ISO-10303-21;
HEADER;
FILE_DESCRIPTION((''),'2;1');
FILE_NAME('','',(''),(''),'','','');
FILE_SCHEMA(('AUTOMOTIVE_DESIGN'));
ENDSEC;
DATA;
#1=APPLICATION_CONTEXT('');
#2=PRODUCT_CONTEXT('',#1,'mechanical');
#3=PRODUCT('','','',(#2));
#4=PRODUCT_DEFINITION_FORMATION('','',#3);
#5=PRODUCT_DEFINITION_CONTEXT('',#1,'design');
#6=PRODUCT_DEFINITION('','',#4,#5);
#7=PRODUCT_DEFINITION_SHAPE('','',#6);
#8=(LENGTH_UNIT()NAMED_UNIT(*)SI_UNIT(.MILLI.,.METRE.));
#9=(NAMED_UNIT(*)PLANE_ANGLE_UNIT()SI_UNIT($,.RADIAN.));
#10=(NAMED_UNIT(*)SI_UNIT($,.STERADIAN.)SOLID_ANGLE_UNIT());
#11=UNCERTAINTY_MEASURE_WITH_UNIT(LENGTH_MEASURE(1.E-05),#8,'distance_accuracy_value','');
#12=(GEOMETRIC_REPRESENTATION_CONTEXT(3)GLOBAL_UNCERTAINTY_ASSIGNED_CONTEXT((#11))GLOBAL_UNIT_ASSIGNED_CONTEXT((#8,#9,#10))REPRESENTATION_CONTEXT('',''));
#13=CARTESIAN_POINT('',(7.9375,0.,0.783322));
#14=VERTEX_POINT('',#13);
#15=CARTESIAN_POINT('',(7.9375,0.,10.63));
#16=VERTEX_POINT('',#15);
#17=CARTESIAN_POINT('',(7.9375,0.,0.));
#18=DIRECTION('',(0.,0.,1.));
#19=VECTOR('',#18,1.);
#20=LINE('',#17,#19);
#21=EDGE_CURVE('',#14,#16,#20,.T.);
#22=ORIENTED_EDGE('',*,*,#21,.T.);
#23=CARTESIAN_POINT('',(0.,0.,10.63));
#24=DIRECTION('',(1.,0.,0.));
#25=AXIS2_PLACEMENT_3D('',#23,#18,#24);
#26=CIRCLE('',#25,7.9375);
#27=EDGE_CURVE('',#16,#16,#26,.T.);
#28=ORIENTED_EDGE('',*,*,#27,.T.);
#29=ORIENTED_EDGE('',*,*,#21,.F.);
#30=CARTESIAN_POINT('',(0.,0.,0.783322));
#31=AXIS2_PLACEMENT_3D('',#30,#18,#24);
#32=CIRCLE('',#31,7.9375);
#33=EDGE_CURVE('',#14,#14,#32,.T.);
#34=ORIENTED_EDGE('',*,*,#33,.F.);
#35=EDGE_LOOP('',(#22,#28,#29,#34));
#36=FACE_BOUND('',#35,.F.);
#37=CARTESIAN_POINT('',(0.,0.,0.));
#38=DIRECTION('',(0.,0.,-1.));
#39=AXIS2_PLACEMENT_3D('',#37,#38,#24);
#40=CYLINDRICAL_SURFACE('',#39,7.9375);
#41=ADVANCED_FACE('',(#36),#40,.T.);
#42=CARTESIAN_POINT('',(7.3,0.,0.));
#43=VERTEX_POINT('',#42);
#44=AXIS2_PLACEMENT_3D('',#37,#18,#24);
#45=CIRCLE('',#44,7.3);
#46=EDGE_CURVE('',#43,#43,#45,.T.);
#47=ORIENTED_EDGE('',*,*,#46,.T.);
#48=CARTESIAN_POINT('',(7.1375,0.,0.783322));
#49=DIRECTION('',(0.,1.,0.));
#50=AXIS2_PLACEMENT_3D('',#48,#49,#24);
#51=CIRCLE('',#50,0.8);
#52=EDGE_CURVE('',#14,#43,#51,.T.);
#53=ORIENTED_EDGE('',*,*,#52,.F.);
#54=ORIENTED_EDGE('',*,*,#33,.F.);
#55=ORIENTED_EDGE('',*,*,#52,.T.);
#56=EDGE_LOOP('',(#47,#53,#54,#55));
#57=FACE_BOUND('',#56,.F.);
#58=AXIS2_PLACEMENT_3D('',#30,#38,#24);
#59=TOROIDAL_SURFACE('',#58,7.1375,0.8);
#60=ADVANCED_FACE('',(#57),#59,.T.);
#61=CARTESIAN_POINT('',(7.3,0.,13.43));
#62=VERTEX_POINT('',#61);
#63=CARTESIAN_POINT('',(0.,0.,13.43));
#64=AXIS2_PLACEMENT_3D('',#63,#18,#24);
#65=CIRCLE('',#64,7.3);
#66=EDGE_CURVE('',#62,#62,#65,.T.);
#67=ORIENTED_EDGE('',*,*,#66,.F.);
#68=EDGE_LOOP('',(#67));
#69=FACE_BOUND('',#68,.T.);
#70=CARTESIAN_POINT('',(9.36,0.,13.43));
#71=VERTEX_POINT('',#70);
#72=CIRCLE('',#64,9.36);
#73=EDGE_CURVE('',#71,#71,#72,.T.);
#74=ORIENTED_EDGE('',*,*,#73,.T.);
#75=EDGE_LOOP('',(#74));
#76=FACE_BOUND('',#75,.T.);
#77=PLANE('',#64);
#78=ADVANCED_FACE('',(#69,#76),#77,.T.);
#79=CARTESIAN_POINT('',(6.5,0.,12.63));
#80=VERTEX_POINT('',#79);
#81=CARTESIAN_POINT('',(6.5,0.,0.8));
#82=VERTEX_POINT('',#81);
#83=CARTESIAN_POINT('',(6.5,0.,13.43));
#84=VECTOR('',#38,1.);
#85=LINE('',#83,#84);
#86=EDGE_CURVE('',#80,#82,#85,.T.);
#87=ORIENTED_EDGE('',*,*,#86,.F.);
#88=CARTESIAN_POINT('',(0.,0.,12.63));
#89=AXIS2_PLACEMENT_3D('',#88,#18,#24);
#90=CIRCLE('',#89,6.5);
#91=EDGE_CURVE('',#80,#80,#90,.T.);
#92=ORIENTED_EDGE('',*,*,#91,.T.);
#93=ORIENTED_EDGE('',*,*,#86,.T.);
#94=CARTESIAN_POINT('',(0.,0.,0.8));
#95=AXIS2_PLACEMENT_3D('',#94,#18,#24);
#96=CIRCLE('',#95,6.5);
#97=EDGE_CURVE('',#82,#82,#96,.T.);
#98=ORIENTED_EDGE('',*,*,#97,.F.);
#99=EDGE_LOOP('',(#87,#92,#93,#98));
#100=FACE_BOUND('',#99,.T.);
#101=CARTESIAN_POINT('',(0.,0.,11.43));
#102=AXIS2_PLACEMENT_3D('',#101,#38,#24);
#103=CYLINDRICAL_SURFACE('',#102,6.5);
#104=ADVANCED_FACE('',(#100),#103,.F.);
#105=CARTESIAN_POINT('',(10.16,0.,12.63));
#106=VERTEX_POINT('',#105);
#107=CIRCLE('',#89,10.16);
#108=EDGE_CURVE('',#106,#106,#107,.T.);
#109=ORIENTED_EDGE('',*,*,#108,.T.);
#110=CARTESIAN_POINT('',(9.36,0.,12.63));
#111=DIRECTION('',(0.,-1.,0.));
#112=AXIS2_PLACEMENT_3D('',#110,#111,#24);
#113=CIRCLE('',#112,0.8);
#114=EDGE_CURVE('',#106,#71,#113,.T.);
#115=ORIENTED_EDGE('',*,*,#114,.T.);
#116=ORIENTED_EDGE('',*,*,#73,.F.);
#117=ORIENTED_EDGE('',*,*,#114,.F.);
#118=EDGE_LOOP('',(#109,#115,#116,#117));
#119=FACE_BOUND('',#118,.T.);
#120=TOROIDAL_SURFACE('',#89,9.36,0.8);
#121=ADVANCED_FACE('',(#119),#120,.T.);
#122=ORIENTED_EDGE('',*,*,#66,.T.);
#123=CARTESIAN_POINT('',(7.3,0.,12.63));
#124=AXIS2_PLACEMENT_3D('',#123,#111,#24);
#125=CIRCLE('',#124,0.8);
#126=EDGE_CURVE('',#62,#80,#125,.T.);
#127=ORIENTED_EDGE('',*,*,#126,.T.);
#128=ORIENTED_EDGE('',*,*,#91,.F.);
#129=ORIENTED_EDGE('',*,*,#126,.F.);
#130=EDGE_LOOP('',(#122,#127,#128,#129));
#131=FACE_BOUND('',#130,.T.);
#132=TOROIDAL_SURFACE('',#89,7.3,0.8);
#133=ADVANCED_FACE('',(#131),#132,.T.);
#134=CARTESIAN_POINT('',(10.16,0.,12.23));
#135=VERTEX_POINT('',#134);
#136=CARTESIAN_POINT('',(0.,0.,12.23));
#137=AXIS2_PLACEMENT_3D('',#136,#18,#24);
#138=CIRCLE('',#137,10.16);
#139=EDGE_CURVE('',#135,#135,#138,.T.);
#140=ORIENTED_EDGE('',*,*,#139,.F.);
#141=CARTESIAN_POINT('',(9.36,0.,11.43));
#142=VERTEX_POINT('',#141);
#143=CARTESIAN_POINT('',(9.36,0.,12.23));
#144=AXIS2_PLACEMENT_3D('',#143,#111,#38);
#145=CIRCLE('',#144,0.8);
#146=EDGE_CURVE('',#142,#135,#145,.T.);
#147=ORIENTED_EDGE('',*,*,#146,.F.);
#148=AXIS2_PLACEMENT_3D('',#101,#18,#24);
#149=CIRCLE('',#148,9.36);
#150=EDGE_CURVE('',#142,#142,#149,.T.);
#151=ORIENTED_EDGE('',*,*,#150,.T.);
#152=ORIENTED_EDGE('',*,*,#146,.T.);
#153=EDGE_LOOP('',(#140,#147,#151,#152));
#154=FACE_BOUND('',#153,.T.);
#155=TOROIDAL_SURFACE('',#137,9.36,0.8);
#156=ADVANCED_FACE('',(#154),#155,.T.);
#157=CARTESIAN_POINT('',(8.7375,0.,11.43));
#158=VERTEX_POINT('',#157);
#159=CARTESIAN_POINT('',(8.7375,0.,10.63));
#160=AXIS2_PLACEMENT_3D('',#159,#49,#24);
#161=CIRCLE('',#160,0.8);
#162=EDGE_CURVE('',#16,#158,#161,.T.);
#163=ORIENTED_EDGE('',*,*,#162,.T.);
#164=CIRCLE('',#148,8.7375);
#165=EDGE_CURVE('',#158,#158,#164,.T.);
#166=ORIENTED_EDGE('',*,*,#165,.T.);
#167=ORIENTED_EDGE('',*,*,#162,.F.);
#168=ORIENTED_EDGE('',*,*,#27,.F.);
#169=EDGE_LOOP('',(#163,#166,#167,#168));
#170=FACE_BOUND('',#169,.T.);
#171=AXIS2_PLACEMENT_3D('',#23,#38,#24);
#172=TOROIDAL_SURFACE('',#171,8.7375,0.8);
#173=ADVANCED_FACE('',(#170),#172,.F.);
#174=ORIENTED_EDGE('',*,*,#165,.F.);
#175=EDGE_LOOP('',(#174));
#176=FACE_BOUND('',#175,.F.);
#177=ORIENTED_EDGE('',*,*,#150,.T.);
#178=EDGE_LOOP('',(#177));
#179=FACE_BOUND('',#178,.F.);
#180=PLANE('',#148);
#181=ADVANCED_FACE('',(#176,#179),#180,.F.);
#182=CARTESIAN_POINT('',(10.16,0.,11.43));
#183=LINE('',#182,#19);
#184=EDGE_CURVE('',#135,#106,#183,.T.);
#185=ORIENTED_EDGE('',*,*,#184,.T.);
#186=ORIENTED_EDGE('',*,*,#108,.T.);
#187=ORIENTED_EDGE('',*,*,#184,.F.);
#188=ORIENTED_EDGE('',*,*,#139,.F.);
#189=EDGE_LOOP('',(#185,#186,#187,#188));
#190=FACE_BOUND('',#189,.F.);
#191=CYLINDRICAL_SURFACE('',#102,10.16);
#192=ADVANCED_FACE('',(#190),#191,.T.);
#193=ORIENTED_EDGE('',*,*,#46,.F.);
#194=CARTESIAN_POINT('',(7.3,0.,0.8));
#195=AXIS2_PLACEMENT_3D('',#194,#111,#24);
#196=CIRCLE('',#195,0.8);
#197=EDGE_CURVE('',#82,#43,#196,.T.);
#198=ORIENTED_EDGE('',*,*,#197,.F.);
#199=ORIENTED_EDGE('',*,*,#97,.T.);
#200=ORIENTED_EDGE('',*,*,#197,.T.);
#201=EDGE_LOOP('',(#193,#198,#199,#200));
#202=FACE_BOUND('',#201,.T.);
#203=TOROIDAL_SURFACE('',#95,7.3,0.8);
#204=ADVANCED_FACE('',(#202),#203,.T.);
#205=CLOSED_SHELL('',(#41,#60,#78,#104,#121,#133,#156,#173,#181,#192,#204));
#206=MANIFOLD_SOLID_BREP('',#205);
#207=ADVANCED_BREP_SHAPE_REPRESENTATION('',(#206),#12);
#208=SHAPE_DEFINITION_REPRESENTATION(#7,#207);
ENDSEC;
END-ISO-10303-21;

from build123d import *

# Parameters (mm, degrees)
F0_R     = 7.9375
F0_R_2   = 6.5
F1_DEPTH = 11.43
F2_R     = 10.16
F2_R_2   = 6.5
F3_DEPTH = 2
F4_R     = 0.8


# Not quite as in the source:
# - a fillet or chamfer that OpenCascade refuses, or shapes differently, is made with other operations: its cross-section is extruded or revolved along the edge and cut away or added


with BuildPart() as f1:
    # F0 (on Top) → F1 (new body)
    with BuildSketch(Plane.XY):
        Circle(F0_R)
        Circle(F0_R_2, mode=Mode.SUBTRACT)
    extrude(amount=F1_DEPTH)

    # F2 (on face) → F3 (join)
    with BuildSketch(Plane.XY.offset(11.43)):
        Circle(F2_R)
        Circle(F2_R_2, mode=Mode.SUBTRACT)
    extrude(amount=F3_DEPTH)

    # F4
    f4_edges = [f1.edges().sort_by_distance(p)[0] for p in [
        (-6.5, 0, 13.43),
        (-6.5, 0, 0),
        (-7.9375, 0, 11.43),
        (-10.16, 0, 13.43),
    ]]
    fillet(f4_edges, radius=F4_R)

    # F5: fillet of radius 0.8 on 2 edges, made by hand

    # F5_s1 → F5_t2 (revolve, cut)
    with BuildSketch(Plane.XZ):
        with BuildLine():
            ThreePointArc((7.9375, 0.7833222517), (7.7579836823, 0.2783470048), (7.3, 0))
            Line((7.3, 0), (7.9375, 0))
            Line((7.9375, 0), (7.9375, 0.7833222517))
        make_face()
    revolve(axis=Axis((0, 0, 0), (0, 0, 1)), mode=Mode.SUBTRACT)

    # F5_s3 → F5_t4 (revolve, cut)
    with BuildSketch(Plane.XZ):
        with BuildLine():
            ThreePointArc((9.36, 11.43), (9.9256854249, 11.6643145751), (10.16, 12.23))
            Line((10.16, 12.23), (10.16, 11.43))
            Line((10.16, 11.43), (9.36, 11.43))
        make_face()
    revolve(axis=Axis((0, 0, 11.43), (0, 0, 1)), mode=Mode.SUBTRACT)


solid = f1.part
